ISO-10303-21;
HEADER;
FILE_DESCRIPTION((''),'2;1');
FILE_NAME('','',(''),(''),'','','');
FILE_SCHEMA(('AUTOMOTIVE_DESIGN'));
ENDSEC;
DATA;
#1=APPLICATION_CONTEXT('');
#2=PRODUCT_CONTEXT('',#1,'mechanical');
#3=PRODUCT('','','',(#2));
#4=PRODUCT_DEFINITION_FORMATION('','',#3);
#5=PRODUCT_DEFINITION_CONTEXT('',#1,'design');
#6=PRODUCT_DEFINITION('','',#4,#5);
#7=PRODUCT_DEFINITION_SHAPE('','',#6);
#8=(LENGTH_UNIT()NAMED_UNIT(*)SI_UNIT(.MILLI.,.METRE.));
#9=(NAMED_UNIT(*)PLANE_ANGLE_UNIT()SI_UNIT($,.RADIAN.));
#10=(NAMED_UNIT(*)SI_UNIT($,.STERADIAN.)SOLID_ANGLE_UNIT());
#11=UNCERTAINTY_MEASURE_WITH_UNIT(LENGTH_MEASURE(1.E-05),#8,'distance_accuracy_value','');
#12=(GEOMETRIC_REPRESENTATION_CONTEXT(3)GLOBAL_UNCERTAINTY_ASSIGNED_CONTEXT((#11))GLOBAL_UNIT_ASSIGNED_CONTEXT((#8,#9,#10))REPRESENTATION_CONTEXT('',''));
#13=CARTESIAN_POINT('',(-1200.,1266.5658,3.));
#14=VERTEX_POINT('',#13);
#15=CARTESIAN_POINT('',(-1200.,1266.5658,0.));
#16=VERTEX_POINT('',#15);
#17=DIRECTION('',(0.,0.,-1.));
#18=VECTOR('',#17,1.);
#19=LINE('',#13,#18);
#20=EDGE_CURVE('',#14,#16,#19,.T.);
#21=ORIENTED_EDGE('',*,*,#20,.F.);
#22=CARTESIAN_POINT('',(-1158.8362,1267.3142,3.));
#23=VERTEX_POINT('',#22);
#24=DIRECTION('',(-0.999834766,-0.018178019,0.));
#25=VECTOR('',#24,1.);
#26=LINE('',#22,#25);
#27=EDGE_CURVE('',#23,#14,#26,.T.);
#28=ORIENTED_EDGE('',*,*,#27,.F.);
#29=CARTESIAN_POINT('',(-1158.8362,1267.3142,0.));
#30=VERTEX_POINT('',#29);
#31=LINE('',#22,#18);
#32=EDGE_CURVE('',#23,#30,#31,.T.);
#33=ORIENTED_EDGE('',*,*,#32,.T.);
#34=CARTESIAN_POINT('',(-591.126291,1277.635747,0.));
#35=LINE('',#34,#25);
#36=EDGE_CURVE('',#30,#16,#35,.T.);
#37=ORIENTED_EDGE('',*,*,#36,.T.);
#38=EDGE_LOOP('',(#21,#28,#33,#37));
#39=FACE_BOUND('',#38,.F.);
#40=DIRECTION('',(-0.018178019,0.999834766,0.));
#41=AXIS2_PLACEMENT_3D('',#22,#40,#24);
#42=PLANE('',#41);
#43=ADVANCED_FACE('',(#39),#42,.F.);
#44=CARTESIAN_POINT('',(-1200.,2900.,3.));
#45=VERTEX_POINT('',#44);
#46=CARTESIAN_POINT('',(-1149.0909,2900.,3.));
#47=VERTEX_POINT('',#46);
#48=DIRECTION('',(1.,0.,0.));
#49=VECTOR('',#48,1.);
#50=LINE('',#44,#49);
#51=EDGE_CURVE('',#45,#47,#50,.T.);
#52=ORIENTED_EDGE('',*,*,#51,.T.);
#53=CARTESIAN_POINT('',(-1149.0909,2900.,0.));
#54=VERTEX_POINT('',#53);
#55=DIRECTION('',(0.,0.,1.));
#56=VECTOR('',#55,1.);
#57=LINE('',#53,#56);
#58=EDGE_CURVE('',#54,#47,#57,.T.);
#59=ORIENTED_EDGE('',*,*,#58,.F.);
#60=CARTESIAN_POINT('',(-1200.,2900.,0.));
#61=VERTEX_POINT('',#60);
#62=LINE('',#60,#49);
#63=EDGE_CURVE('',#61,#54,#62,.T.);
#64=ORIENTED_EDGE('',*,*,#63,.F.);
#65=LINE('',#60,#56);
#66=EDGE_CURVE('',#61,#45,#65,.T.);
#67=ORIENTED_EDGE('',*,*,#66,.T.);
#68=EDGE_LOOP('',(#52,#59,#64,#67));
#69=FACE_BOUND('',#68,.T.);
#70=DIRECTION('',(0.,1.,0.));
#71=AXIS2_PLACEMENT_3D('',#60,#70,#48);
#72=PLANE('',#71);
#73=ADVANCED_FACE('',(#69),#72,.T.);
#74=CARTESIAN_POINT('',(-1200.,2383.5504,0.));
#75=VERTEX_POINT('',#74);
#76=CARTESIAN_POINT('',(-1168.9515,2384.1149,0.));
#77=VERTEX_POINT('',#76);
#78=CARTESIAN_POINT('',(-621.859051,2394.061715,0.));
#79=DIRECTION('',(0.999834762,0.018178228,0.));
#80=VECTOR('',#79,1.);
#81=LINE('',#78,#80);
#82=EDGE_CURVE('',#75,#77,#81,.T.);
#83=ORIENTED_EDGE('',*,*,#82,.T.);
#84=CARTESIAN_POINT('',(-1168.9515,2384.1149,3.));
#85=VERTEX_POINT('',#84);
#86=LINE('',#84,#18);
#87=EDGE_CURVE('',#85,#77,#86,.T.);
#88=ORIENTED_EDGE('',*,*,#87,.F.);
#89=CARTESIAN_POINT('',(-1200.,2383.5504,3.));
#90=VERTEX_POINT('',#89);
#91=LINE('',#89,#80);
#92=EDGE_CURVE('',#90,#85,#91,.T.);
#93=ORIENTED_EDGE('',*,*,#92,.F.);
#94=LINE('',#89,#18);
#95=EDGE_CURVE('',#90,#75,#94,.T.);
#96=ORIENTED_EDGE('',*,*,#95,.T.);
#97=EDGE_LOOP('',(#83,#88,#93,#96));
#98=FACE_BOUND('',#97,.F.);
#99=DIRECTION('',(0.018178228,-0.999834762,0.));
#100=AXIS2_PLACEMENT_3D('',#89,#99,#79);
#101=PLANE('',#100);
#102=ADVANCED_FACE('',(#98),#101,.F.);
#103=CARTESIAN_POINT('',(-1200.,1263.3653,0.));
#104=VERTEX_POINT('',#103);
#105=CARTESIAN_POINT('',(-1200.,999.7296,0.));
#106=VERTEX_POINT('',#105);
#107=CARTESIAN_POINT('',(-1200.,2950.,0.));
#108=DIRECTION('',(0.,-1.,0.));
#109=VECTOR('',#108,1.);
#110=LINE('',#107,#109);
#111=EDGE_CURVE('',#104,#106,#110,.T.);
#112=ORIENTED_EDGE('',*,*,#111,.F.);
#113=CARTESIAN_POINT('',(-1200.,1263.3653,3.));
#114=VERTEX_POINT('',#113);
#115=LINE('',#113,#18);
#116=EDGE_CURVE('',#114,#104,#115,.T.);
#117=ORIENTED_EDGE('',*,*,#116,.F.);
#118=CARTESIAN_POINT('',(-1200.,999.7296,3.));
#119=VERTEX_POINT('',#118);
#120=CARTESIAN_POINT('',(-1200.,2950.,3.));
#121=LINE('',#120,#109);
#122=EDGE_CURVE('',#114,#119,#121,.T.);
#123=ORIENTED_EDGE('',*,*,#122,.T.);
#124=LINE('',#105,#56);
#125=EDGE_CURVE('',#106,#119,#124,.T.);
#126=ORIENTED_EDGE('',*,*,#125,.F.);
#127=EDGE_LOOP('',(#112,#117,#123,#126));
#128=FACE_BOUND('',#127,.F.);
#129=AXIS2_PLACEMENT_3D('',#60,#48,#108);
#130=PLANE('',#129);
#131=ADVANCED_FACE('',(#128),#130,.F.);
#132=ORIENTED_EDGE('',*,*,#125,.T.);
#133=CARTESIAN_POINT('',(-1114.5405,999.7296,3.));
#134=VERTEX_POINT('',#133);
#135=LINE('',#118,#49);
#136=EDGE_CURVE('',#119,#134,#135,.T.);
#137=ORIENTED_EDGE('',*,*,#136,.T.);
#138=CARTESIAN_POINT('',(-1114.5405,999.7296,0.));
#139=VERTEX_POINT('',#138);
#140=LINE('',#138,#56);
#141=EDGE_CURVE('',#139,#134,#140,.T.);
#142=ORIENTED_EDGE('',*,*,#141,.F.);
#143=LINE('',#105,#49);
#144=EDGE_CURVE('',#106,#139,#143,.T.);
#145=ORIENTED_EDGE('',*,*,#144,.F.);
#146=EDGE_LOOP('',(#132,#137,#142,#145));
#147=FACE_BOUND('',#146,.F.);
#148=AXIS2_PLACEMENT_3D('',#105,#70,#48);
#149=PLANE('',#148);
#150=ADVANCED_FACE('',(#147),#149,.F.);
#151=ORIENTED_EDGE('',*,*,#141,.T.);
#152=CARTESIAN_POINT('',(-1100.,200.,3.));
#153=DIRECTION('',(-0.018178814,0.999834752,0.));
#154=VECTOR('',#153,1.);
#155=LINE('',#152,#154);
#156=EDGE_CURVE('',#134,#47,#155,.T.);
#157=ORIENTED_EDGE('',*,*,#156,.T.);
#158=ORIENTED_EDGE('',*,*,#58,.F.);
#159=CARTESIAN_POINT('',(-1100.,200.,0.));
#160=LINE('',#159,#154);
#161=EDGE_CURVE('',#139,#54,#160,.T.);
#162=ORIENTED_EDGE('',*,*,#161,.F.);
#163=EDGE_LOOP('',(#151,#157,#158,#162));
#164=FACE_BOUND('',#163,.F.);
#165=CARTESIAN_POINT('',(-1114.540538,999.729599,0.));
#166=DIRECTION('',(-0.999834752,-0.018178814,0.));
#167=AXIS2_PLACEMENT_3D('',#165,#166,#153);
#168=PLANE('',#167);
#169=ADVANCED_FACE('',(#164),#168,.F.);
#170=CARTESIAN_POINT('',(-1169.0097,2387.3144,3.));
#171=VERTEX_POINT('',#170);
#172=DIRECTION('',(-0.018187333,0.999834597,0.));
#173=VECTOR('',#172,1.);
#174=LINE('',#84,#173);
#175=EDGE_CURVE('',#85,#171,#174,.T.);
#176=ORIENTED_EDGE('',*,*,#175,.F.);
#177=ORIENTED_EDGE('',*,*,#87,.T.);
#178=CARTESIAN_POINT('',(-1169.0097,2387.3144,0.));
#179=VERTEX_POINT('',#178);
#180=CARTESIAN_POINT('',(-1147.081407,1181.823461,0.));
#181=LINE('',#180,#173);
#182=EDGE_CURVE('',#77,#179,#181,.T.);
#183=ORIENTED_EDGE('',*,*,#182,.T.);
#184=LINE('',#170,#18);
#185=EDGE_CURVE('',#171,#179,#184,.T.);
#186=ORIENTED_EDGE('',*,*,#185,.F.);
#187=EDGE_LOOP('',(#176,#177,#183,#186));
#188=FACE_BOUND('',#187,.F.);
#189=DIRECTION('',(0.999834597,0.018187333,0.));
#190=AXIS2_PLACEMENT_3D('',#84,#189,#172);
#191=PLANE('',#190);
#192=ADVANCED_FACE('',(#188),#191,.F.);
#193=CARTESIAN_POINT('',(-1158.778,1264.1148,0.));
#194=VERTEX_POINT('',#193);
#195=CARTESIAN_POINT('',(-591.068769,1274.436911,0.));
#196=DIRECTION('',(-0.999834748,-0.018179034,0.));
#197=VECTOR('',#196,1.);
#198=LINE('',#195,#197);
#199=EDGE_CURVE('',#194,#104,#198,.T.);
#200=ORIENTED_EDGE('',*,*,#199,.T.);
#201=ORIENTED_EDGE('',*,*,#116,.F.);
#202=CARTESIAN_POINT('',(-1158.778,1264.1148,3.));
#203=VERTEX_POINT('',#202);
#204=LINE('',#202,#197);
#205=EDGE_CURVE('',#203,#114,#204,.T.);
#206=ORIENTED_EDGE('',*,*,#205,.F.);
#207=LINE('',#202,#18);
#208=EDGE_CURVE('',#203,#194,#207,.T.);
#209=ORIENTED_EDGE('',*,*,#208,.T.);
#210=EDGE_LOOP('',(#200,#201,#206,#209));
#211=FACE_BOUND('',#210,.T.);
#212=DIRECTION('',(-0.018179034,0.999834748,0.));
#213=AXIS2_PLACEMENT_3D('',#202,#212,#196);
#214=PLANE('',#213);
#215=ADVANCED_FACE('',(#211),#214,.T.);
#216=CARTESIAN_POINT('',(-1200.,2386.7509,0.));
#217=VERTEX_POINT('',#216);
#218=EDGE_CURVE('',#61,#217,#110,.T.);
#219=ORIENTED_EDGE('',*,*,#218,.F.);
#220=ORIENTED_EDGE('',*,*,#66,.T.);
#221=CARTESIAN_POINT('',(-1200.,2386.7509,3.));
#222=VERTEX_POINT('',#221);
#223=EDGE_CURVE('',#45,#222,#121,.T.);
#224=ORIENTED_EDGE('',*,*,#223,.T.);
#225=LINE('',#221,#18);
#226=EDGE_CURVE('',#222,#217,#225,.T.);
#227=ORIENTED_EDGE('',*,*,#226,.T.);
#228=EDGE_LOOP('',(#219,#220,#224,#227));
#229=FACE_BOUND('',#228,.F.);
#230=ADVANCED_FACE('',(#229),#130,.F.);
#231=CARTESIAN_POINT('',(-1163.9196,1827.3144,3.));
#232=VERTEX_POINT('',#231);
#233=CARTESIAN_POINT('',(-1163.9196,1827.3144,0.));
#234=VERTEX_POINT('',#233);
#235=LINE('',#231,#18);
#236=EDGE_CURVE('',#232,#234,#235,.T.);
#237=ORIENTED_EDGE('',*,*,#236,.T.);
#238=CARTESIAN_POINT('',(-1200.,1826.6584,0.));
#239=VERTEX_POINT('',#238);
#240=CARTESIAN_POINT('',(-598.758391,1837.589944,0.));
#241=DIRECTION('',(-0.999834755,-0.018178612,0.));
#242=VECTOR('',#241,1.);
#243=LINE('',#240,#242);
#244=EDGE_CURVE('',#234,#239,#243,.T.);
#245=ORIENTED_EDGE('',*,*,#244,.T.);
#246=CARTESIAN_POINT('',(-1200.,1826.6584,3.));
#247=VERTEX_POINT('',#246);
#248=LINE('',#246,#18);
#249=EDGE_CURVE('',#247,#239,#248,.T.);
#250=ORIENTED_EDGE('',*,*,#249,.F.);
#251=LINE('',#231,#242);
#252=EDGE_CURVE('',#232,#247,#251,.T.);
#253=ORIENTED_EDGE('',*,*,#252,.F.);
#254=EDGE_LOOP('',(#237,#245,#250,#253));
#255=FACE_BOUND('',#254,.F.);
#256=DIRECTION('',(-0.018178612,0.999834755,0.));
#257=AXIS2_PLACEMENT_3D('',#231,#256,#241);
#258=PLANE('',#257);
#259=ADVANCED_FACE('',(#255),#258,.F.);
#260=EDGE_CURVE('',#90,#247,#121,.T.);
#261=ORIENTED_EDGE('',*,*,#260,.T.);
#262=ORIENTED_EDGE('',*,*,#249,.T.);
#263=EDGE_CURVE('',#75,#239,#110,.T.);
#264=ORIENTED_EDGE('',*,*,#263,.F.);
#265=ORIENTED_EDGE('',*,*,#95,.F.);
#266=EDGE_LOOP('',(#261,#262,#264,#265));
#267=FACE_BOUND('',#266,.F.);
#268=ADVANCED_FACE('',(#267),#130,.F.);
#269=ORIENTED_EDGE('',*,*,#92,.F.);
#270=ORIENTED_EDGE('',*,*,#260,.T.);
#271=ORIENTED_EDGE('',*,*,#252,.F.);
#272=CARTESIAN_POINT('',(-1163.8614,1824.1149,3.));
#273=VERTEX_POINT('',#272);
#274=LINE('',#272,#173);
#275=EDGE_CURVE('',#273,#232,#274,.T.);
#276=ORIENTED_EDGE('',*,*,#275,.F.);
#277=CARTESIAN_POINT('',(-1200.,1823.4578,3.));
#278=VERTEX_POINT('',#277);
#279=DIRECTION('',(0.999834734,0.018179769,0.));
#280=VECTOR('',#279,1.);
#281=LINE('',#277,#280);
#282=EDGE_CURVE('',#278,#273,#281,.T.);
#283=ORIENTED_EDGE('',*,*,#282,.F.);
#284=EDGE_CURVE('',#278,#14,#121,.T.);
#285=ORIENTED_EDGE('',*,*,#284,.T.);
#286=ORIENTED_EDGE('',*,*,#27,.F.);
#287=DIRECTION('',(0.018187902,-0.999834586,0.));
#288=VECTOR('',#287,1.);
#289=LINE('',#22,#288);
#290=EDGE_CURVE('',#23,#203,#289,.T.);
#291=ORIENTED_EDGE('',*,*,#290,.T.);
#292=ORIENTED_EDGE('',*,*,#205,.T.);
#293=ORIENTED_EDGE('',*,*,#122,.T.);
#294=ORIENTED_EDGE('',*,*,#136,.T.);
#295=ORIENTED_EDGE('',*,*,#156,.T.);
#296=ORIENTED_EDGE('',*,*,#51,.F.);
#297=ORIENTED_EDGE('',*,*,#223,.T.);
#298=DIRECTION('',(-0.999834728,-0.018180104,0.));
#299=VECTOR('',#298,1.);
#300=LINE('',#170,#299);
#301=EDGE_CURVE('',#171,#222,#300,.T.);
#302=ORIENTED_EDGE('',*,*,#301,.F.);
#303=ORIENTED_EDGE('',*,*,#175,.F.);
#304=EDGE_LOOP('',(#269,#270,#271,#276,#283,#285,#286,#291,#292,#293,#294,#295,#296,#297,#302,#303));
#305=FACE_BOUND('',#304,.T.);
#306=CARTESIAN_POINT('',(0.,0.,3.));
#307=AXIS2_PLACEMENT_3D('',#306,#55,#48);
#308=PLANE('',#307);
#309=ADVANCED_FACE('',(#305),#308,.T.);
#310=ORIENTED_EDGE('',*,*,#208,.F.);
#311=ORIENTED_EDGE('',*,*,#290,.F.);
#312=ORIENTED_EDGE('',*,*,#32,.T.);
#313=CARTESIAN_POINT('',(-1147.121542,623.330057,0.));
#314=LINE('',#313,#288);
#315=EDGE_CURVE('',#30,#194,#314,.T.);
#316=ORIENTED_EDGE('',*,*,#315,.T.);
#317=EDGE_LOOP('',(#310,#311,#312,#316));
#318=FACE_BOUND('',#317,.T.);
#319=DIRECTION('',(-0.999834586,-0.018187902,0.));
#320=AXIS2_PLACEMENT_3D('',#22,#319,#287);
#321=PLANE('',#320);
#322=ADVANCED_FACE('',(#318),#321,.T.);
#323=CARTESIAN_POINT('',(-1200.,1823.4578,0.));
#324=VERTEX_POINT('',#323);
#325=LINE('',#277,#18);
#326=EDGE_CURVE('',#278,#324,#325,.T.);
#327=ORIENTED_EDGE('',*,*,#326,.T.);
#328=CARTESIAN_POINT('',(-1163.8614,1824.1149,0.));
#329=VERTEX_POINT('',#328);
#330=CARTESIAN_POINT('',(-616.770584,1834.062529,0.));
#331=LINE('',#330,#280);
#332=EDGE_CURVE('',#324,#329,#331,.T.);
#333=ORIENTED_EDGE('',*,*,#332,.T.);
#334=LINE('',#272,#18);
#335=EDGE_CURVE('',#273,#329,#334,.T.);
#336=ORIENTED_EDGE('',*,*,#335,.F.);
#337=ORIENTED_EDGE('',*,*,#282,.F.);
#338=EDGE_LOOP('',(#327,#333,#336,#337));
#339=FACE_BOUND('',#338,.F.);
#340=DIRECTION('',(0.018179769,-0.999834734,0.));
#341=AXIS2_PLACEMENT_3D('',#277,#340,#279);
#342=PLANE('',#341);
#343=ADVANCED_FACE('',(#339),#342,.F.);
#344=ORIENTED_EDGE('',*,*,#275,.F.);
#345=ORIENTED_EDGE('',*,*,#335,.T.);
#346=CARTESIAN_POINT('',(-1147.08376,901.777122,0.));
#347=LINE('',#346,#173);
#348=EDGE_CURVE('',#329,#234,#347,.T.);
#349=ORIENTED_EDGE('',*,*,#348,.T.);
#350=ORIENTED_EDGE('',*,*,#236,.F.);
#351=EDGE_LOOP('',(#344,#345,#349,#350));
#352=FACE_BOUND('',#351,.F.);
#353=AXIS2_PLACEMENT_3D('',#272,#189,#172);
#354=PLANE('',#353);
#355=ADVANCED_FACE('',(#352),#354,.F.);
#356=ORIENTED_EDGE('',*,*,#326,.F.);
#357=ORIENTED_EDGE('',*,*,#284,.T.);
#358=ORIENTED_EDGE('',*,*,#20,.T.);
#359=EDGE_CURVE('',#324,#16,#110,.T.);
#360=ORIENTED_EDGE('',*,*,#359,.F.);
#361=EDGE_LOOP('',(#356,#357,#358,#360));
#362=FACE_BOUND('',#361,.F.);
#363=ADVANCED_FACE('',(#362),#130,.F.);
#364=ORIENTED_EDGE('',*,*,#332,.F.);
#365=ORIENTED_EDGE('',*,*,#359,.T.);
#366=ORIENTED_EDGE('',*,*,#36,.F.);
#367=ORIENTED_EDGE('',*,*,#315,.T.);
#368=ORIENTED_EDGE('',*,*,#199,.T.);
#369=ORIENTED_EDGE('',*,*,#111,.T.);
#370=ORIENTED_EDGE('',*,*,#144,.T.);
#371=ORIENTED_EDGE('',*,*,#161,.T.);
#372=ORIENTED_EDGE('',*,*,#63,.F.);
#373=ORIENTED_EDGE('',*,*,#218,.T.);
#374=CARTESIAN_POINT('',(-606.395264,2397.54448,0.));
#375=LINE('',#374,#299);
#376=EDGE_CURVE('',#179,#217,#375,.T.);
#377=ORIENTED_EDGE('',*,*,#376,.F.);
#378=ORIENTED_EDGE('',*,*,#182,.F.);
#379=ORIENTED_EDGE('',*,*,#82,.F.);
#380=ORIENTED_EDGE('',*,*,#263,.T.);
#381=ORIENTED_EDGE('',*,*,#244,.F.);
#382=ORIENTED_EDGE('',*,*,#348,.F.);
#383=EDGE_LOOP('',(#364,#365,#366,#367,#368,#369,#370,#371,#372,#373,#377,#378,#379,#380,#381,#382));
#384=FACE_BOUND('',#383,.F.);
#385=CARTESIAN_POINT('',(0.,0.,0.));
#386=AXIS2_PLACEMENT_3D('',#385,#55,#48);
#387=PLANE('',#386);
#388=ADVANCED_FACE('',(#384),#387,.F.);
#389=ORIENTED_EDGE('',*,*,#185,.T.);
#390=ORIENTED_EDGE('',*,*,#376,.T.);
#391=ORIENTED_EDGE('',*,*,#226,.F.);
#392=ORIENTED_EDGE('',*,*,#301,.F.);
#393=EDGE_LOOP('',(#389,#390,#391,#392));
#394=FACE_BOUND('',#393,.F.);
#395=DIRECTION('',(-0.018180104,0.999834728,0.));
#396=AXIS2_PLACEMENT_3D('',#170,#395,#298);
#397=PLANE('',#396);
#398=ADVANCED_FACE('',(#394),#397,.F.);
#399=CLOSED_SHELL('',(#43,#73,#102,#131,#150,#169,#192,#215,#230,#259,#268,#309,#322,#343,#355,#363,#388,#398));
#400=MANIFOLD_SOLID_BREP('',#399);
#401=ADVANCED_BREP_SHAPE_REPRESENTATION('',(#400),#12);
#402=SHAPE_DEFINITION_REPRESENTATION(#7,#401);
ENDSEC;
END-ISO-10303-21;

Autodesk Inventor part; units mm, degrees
ref_plane "YZ Plane" through (0, 0, 0) normal (1, 0, 0) x (0, 1, 0)
ref_plane "XZ Plane" through (0, 0, 0) normal (0, 1, 0) x (-1, 0, 0)
ref_plane "XY Plane" through (0, 0, 0) normal (0, 0, 1) x (1, 0, 0)
sketch "Sketch1" plane through (0, 0, 0) normal (0, 0, 1) x (1, 0, 0)
  line L0 (1200, 2950) -> (-1200, 2950)
  line L1 (-1200, 2950) -> (-1200, 0)
  line L2 (-1200, 0) -> (1200, 0)
  line L3 (1200, 0) -> (1200, 2950)
  line L4 (1150, 2950) -> (1150, 0)
  line L5 (-1150, 0) -> (-1150, 2950) construction
  line L6 (0, 2950) -> (0, 50) construction
  line L7 (-1100, 200) -> (-950, 50)
  line L8 (-1200, 100) -> (-1100, 100)
  line L9 (-1100, 100) -> (-1100, 0)
  line L10 (-1100, 200) -> (-1150, 2950)
  arc A0 (-1100.4545, 224.9959) -> (-1082.3223, 182.3223) centre (-1100, 200) ccw
  arc A1 (-1082.3223, 182.3223) -> (-1100.4545, 224.9959) centre (-1100, 200) ccw construction
  line L11 (-1200, 255) -> (-1101, 255) construction
  line L12 (0, 50) -> (-950, 50)
  line L13 (0, 50) -> (0, 0)
  line L14 (1505.3449, -225.894) -> (355.3449, -225.894)
  line L15 (-1200, 245) -> (-1100.8182, 245)
  line L16 (-1200, 2900) -> (-1149.0909, 2900)
  line L17 (-1200, 999.7296) -> (-1114.5405, 999.7296)
  dimension "d3" = 2400
  dimension "d4" = 2950
  dimension "d5" = 50
  dimension "d6" = 100
  dimension "d7" = 50
  dimension "d9" = 135
  dimension "d10" = 950
  dimension "d11" = 1150
  dimension "d12" = 136.042
  dimension "d13" = 50
  dimension "d14" = 100
  dimension "d15" = 212.132
  dimension "d17" = 55
  dimension "d20" = 200
  dimension "d50" = 2705
  dimension "d53" = 50
extrude "Plate1" add sketch "Sketch1" along normal blind 3 contours L10 L17 L1 L16
sketch "Sketch2" plane through (0, 0, 3) normal (0, 0, 1) x (1, 0, 0)
  line L0 (-1149.0909, 2900) -> (-1114.5405, 999.7296) projected
  line L1 (-1200, 999.7296) -> (-1200, 2900) projected
  line L2 (-1100.8182, 245) -> (-1149.0909, 2900) projected
  line L3 (-1158.8362, 1267.3142) -> (-1158.778, 1264.1148)
  line L4 (-1158.778, 1264.1148) -> (-1119.3606, 1264.8314) construction
  line L5 (-1149.0909, 2900) -> (-1100.8182, 245) projected
  line L6 (-1158.778, 1264.1148) -> (-1200, 1263.3653)
  line L7 (-1158.8362, 1267.3142) -> (-1200, 1266.5658)
  line L8 (-1200, 703.2727) -> (-1153.6813, 704.1149)
  line L9 (-1153.6813, 704.1149) -> (-1153.7395, 707.3144)
  line L10 (-1153.6813, 704.1149) -> (-1109.1804, 704.924) construction
  line L11 (-1153.7395, 707.3144) -> (-1200, 706.4732)
  line L12 (-1200, 1823.4578) -> (-1163.8614, 1824.1149)
  line L13 (-1163.8614, 1824.1149) -> (-1163.9196, 1827.3144)
  line L14 (-1163.9196, 1827.3144) -> (-1200, 1826.6584)
  line L15 (-1163.8614, 1824.1149) -> (-1129.5407, 1824.7389) construction
  line L16 (-1200, 2383.5504) -> (-1168.9515, 2384.1149)
  line L17 (-1168.9515, 2384.1149) -> (-1169.0097, 2387.3144)
  line L18 (-1168.9515, 2384.1149) -> (-1139.7208, 2384.6464) construction
  line L19 (-1169.0097, 2387.3144) -> (-1200, 2386.7509)
  line L20 (-1200, 2900) -> (-1149.0909, 2900) projected
  line L21 (-1114.5405, 999.7296) -> (-1200, 999.7296) projected
  point P0 (0, 0)
  point P1 (-1150, 2950)
  dimension "d34" = 46.3264
  dimension "d36" = 41.2288
  dimension "d39" = 36.1445
  dimension "d42" = 31.0536
  dimension "d43" = 560
  dimension "d44" = 3.2
  dimension "d45" = 560
  dimension "d46" = 3.2
  dimension "d47" = 560
  dimension "d48" = 3.2
  dimension "d49" = 3.2
  dimension "d52" = 460
extrude "Extrusion1" cut sketch "Sketch2" against normal through all contours L19 L17 L16 L1 | L1 L7 L3 L6 | L14 L13 L12 L1
sketch "Sketch3" plane through (0, 0, 0) normal (0, 0, -1) x (-1, 0, 0)
  line L0 (1163.9196, 1827.3144) -> (1200, 1826.6584) construction
  line L1 (1200, 2383.5504) -> (1200, 1826.6584) construction
  line L2 (1200, 2383.5504) -> (1168.9515, 2384.1149) construction
  line L3 (1168.9515, 2384.1149) -> (1169.0097, 2387.3144) construction
  line L4 (1169.0097, 2387.3144) -> (1200, 2386.7509) construction
  line L5 (1200, 2900) -> (1200, 2386.7509) construction
  line L6 (1149.0909, 2900) -> (1200, 2900) construction
  line L7 (1200, 1263.3653) -> (1158.778, 1264.1148) construction
  line L8 (1158.778, 1264.1148) -> (1158.8362, 1267.3142) construction
  line L9 (1158.8362, 1267.3142) -> (1200, 1266.5658) construction
  line L10 (1200, 1823.4578) -> (1200, 1266.5658) construction
  line L11 (1200, 1823.4578) -> (1163.8614, 1824.1149) construction
  line L12 (1163.8614, 1824.1149) -> (1163.9196, 1827.3144) construction
  line L13 (1130.7428, 1027.3062) -> (1187.6517, 1027.3062) construction
  line L14 (1187.6517, 1027.3062) -> (1187.6517, 1023.7324) construction
  line L15 (1187.6517, 1023.7324) -> (1130.7428, 1023.7324) construction
  line L16 (1130.7428, 1023.7324) -> (1130.7428, 1027.3062) construction
  point P0 (0, 0)
mark "Mark1"
equation "\"d11\" = d10 + d18"
equation "\"d14\" = d6"
equation "\"d43\" = Stringer1_step"
equation "\"d45\" = Stringer1_step"
equation "\"d47\" = Stringer1_step"
equation "\"d52\" = Stringer1_hight"
equation "\"d2\" = Thickness"
equation "\"BendReliefWidth\" = Thickness"
equation "\"BendReliefDepth\" = 0.5 * Thickness"
equation "\"CornerReliefSize\" = 4 * Thickness"
equation "\"MinimumRemnant\" = 2 * Thickness"
equation "\"TransitionRadius\" = BendRadius"
equation "\"JacobiRadiusSize\" = BendRadius"
equation "\"GapSize\" = Thickness"
equation "\"d18\" = d19"
equation "\"Stringer1_step\" = 560"
equation "\"Stringer1_hight\" = 460"
equation "\"Thickness\" = 3"
equation "\"BendRadius\" = 5"
equation "\"d19\" = 200"
properties part number "BSH 024 rib board short" material "09g2s"
